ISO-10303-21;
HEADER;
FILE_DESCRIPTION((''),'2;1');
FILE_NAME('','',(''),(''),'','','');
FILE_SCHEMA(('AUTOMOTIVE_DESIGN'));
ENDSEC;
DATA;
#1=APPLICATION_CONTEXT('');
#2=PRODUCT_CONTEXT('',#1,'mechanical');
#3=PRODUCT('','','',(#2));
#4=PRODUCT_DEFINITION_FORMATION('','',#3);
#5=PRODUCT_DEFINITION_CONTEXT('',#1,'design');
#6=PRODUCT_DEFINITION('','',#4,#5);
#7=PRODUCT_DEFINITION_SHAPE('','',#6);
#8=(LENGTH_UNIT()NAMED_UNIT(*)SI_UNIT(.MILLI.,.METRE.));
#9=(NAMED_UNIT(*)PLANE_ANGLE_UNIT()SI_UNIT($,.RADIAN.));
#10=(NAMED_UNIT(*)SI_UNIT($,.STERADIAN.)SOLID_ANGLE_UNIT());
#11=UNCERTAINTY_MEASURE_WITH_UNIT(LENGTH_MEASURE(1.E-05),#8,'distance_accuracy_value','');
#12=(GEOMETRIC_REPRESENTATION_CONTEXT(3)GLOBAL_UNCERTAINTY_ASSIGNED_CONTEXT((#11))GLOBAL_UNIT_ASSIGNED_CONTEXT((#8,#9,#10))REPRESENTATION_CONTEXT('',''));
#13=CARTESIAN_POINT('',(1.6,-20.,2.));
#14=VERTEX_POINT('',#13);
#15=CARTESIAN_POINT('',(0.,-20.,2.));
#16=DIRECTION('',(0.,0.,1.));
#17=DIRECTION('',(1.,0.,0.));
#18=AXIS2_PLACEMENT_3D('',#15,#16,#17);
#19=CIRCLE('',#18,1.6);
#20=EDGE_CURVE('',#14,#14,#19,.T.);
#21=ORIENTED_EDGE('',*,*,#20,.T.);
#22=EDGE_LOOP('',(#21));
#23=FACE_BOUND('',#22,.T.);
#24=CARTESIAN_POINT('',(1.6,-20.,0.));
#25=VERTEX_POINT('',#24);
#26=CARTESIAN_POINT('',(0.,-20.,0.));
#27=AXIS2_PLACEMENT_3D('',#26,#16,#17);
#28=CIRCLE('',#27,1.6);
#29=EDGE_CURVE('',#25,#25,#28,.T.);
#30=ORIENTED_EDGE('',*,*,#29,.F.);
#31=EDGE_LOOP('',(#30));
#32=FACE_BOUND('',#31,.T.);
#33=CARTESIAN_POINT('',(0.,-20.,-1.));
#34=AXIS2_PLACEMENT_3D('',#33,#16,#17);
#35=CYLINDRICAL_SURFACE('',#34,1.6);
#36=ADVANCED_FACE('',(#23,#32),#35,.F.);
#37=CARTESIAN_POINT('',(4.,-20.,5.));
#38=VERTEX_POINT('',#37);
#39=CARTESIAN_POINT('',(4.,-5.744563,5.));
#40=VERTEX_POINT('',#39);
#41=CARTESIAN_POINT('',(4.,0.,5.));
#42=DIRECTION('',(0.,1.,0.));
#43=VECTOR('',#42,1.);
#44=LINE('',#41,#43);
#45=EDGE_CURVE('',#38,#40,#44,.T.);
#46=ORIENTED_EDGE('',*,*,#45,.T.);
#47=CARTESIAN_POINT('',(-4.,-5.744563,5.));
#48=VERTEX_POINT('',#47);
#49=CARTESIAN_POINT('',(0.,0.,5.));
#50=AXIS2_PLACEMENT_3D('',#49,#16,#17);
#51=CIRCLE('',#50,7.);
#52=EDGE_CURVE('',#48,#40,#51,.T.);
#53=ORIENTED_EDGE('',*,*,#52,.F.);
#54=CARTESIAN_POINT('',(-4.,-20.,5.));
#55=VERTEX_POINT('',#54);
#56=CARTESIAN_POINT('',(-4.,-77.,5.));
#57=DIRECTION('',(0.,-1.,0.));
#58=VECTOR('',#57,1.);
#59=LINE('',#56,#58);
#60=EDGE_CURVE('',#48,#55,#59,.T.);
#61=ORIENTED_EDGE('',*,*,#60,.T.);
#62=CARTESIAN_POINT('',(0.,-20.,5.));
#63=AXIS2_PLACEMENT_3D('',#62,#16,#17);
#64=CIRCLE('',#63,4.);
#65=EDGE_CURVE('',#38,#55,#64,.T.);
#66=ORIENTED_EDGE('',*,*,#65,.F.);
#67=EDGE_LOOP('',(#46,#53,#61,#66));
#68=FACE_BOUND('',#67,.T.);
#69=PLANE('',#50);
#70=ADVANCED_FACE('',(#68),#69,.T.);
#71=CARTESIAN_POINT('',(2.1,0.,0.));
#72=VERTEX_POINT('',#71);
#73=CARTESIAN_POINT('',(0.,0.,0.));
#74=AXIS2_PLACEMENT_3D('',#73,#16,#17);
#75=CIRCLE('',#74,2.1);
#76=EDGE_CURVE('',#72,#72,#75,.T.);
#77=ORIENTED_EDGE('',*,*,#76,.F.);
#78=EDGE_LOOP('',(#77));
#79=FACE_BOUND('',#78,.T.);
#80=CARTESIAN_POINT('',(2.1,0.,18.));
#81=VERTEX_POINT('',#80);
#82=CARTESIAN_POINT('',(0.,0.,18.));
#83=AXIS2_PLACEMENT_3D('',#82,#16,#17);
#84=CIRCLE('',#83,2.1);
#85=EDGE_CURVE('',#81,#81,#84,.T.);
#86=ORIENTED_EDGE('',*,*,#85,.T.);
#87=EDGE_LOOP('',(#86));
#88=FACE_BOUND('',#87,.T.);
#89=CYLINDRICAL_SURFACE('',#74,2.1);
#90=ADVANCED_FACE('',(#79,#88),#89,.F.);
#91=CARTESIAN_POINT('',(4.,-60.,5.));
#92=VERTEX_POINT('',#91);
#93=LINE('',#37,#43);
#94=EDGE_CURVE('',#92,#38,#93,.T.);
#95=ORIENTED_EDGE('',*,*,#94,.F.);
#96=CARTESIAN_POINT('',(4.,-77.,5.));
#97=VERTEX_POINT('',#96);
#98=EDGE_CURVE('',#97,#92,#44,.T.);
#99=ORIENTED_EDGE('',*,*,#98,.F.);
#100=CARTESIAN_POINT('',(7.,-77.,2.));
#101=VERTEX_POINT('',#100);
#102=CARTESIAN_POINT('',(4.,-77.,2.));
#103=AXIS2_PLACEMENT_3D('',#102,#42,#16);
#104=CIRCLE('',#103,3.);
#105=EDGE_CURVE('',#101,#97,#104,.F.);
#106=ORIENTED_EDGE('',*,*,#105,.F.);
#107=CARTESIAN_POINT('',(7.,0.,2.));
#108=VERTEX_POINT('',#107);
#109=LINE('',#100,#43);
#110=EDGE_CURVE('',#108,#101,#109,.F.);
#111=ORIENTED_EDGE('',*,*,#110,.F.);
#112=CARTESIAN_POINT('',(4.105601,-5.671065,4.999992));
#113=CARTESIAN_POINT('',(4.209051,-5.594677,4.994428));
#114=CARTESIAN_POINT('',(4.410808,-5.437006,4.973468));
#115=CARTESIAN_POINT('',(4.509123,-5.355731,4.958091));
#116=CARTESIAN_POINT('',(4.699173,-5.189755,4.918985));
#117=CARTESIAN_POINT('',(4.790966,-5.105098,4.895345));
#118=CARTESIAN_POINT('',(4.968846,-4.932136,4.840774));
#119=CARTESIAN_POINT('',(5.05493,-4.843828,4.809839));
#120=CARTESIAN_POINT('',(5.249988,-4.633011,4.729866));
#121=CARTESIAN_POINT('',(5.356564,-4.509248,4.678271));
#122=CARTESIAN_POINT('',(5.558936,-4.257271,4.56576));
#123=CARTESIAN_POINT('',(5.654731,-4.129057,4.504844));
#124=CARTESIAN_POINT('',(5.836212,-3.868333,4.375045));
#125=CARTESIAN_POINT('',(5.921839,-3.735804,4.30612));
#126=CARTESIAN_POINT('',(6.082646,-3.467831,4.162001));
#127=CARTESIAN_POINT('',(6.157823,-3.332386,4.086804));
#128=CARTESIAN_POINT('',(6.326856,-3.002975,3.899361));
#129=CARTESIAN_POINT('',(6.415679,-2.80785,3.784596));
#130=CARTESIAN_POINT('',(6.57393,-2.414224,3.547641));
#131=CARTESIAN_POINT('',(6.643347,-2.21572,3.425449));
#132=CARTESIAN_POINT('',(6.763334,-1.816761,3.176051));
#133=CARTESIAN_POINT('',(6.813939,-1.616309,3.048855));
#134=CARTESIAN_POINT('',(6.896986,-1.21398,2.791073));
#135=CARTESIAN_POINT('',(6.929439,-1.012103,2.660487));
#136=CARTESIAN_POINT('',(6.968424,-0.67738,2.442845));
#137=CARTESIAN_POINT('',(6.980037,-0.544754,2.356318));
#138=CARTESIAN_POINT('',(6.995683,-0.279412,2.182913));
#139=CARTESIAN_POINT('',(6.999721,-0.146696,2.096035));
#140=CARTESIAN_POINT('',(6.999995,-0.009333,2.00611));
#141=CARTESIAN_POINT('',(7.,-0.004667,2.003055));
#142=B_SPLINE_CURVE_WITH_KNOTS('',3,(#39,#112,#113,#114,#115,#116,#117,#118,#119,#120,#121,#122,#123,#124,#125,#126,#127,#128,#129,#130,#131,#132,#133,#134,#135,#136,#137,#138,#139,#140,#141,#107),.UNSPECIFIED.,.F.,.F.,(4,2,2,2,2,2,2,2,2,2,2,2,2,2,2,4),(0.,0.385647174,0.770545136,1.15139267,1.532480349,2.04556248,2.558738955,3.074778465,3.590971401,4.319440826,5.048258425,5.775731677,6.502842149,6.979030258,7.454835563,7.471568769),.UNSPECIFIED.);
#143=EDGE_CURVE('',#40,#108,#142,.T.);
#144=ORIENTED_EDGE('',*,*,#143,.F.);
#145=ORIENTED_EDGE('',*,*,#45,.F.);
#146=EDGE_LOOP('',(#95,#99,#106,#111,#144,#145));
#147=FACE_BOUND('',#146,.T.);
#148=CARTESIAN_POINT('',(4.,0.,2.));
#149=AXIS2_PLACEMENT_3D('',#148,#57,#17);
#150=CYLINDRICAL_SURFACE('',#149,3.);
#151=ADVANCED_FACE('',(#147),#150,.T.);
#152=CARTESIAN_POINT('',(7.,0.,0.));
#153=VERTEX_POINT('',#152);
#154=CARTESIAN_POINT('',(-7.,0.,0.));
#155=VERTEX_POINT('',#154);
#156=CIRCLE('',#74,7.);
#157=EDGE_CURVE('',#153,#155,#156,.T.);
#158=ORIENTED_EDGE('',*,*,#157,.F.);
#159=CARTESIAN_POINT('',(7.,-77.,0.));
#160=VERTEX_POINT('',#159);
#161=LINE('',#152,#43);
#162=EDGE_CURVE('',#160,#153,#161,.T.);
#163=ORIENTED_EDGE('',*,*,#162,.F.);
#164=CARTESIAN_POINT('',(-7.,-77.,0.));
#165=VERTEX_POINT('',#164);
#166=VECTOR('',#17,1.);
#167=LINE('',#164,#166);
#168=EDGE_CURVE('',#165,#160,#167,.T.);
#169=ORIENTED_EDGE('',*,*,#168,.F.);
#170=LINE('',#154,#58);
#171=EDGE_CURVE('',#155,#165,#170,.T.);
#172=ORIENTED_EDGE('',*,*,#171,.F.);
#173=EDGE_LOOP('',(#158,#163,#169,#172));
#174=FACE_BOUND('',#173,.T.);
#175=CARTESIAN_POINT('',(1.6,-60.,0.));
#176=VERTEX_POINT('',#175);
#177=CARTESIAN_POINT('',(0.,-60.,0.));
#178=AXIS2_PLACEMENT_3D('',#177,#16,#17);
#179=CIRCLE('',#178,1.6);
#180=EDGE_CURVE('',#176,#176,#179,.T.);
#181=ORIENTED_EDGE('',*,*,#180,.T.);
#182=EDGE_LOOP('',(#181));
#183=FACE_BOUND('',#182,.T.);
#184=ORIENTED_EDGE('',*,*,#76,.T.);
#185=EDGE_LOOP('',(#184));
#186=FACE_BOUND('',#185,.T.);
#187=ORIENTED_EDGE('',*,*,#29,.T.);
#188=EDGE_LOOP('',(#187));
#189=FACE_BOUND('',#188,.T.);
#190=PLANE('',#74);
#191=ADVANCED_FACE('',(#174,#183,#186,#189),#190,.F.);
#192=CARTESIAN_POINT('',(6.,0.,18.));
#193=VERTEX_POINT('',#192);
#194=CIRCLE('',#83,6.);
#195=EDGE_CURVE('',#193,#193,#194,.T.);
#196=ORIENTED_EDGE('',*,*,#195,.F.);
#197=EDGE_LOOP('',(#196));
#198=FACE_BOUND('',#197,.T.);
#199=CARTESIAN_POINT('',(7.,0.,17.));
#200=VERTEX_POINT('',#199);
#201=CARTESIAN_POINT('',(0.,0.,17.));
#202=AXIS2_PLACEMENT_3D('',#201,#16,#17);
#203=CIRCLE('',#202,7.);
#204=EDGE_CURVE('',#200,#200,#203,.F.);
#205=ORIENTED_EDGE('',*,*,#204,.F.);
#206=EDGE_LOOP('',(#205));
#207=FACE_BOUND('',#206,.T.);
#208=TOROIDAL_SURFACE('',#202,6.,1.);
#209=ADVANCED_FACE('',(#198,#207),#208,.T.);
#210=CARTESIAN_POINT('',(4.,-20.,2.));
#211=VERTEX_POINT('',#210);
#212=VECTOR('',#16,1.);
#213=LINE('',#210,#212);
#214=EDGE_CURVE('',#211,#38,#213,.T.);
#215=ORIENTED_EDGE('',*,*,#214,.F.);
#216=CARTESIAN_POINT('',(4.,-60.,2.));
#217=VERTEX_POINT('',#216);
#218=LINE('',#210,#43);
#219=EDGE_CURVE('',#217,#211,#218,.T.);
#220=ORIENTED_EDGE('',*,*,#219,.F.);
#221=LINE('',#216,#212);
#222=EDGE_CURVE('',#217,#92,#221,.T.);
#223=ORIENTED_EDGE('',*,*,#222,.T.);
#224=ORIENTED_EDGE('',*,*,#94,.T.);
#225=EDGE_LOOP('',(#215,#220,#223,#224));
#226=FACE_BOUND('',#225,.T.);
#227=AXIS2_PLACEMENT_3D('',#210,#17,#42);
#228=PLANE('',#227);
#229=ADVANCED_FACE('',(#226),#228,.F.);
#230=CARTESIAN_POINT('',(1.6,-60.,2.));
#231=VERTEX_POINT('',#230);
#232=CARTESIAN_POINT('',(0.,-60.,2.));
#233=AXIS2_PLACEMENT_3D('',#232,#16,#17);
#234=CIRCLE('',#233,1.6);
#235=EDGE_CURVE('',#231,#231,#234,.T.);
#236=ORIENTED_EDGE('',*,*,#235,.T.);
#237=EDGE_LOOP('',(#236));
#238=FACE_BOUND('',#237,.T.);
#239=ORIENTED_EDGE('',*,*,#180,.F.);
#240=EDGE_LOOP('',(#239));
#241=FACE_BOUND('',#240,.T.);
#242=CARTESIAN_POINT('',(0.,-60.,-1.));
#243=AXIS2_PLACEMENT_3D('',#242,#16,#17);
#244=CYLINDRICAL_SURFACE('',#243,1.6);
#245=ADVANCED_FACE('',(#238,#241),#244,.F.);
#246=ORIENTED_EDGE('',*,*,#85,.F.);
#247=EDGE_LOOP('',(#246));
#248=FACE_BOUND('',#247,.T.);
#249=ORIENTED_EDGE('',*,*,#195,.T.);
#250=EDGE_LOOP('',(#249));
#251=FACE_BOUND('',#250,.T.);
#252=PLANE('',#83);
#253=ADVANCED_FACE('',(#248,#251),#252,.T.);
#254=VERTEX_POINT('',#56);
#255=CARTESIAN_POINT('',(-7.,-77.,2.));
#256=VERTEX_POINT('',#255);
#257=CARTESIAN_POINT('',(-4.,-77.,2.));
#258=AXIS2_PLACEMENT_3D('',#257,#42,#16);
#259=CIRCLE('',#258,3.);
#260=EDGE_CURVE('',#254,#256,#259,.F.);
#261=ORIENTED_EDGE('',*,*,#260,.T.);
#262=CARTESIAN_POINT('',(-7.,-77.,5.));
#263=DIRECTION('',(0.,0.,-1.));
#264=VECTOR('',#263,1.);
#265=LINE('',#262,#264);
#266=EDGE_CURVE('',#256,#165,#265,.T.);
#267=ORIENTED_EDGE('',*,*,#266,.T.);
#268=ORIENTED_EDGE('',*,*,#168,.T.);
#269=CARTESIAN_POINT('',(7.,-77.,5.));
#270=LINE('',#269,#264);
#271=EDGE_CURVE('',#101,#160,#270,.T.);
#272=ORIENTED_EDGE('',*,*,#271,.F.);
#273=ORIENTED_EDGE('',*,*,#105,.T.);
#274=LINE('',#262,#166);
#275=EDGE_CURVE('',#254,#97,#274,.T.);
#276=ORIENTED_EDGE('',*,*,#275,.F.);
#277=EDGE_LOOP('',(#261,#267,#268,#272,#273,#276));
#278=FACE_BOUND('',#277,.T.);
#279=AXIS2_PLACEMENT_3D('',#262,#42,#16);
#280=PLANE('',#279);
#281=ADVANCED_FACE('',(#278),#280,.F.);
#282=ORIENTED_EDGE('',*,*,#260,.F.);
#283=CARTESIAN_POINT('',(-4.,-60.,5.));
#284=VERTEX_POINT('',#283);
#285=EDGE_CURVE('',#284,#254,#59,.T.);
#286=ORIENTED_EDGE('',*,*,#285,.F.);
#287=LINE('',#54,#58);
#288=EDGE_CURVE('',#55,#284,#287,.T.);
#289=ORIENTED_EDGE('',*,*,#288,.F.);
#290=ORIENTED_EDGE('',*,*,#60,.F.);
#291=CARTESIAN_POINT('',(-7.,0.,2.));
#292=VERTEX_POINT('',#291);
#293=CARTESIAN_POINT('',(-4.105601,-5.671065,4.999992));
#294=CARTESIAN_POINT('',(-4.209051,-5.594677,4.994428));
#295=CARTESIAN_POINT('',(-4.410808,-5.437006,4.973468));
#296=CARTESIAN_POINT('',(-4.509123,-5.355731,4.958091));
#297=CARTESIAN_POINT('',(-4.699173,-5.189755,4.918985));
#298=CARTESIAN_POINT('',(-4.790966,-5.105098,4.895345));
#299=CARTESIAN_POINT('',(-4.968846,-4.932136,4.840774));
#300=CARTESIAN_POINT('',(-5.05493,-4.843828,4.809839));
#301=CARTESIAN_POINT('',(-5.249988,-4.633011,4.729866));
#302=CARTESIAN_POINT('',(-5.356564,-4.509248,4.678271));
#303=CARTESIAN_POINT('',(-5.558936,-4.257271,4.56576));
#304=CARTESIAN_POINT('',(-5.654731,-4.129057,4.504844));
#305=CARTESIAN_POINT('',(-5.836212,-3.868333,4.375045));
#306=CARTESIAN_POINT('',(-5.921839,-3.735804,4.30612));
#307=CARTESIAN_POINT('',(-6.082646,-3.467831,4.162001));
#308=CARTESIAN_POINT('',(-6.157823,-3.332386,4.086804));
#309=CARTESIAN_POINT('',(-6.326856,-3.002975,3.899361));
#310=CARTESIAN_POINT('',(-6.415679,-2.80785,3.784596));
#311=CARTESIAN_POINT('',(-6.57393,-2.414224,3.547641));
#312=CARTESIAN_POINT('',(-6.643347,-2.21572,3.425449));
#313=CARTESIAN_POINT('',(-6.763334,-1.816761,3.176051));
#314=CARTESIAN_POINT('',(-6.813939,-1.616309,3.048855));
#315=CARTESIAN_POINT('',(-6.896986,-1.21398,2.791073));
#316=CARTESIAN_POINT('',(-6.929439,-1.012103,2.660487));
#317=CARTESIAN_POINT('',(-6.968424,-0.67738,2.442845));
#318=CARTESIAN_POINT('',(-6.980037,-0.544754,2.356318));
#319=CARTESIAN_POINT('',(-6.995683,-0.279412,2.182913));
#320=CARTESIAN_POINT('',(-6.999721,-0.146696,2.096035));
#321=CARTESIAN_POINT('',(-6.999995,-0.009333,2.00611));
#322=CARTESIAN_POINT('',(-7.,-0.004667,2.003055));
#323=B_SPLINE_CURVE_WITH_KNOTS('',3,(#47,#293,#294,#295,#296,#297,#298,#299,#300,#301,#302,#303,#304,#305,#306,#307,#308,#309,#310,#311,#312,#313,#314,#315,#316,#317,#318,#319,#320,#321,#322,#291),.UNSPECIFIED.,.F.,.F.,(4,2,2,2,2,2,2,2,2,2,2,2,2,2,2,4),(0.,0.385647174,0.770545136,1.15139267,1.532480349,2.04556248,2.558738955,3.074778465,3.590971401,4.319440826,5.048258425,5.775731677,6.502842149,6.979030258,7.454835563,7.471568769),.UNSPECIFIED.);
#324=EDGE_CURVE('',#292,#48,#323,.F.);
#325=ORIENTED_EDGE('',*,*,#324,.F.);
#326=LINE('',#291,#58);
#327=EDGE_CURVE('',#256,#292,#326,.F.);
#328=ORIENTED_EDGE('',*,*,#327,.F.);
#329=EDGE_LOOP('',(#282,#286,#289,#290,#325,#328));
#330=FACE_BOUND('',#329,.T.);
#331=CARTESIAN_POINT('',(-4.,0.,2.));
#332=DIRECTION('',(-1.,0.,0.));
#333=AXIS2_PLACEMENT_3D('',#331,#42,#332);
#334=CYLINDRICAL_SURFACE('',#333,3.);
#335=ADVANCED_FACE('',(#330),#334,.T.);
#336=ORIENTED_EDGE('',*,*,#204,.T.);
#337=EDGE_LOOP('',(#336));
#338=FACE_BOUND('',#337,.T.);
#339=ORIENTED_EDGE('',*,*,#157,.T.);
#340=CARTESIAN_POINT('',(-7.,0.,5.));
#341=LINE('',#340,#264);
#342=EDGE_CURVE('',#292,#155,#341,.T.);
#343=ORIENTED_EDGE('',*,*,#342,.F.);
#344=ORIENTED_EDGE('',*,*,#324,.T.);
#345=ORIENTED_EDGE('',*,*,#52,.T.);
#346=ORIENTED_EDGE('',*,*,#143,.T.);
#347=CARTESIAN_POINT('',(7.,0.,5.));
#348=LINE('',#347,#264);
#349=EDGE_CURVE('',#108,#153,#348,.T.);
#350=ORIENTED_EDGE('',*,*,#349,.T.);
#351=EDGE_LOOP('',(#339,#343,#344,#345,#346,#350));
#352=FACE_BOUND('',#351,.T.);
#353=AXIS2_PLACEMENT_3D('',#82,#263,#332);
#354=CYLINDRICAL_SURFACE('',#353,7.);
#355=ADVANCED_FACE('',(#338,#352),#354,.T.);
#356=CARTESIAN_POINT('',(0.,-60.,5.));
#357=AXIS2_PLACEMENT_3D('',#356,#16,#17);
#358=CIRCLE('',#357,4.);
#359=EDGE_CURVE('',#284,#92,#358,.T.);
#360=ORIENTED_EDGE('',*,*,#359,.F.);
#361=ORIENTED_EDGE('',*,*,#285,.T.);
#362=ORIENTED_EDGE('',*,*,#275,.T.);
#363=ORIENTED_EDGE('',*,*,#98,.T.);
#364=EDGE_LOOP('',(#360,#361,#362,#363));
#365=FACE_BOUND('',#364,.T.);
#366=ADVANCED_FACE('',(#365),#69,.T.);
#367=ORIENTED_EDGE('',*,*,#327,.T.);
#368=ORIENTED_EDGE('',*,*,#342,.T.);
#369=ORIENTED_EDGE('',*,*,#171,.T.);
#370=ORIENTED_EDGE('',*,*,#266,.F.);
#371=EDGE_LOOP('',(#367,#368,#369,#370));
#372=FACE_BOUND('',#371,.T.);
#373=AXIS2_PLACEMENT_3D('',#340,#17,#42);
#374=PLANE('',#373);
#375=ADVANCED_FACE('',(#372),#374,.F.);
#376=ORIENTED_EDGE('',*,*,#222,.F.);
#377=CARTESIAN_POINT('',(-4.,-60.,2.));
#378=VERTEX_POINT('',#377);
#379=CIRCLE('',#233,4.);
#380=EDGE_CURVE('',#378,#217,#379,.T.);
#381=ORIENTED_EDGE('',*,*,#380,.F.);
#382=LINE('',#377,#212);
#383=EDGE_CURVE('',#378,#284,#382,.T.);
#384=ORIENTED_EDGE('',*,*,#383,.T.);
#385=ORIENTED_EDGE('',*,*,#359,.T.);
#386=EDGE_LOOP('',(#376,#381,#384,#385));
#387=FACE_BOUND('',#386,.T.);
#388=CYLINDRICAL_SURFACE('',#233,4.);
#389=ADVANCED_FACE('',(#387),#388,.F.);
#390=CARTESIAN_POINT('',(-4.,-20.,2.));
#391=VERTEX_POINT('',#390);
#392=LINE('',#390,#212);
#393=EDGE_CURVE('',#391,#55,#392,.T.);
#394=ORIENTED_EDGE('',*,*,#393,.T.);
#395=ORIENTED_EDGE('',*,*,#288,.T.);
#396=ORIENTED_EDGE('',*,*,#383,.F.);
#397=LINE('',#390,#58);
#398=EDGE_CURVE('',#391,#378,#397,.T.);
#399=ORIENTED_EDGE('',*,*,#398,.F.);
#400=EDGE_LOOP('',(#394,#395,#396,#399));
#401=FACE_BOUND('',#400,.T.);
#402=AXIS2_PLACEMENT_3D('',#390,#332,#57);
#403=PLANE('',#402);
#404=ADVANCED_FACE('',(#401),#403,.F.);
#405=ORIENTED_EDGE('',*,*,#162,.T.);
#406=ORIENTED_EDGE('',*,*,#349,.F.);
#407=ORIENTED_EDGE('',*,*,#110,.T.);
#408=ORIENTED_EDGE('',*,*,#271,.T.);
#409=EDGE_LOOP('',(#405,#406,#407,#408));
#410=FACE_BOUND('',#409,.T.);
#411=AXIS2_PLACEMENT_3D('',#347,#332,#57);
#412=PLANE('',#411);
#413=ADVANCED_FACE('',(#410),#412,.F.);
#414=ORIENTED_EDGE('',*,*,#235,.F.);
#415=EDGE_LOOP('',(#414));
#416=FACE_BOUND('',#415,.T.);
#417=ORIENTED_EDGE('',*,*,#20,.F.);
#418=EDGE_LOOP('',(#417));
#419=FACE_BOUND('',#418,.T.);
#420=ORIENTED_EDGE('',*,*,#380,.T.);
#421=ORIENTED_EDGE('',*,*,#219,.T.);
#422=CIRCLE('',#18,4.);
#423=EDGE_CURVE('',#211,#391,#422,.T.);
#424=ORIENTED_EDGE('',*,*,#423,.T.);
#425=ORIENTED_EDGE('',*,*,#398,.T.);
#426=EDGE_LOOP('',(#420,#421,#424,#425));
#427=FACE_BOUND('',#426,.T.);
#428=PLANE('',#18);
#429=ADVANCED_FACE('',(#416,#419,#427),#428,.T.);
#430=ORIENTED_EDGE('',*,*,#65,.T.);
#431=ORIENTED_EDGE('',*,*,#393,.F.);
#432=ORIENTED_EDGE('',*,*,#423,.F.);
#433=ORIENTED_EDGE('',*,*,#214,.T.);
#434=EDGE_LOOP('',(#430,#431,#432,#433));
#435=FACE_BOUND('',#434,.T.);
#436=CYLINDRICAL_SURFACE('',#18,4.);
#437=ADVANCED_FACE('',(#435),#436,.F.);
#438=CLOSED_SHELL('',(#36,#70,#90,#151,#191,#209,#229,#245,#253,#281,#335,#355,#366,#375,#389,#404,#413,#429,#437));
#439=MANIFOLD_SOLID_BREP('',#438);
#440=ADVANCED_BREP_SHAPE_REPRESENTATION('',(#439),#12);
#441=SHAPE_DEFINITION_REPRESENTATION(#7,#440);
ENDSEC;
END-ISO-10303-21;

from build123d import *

# Parameters (mm, degrees)
SKETCH1_R           = 7
BOSS_EXTRUDE1_DEPTH = 18
SKETCH2_W           = 14
SKETCH2_H           = 77
BOSS_EXTRUDE2_DEPTH = 5
SKETCH8_R           = 2.1
CUT_EXTRUDE5_DEPTH  = 18
FILLET3_R           = 3
CUT_EXTRUDE6_DEPTH  = 3
SKETCH10_R          = 1.6
CUT_EXTRUDE7_DEPTH  = 3
FILLET4_R           = 1


with BuildPart() as part:
    # Sketch1 → Boss-Extrude1 (new body)
    with BuildSketch(Plane.XY):
        Circle(SKETCH1_R)
    extrude(amount=BOSS_EXTRUDE1_DEPTH)

    # Sketch2 → Boss-Extrude2 (add)
    with BuildSketch(Plane.XY):
        with Locations((0, -38.5)):
            Rectangle(SKETCH2_W, SKETCH2_H)
    extrude(amount=BOSS_EXTRUDE2_DEPTH)

    # Sketch8 → Cut-Extrude5 (cut)
    with BuildSketch(Plane.XY.offset(18)):
        Circle(SKETCH8_R)
    extrude(amount=-CUT_EXTRUDE5_DEPTH, mode=Mode.SUBTRACT)

    # Fillet3
    # the kernel refuses this fillet: 3 mm, written as the material it takes off along each edge
    with BuildSketch(Plane(origin=(7, 7.5, 5), x_dir=(-1, 0, 0), z_dir=(0, -1, 0))) as fillet3_piece_1_section:
        with BuildLine():
            CenterArc((FILLET3_R, FILLET3_R), FILLET3_R, 180, 90)
            Line((0, FILLET3_R), (0, 0))
            Line((0, 0), (FILLET3_R, 0))
        make_face()
    fillet3_piece_1 = extrude(amount=92, mode=Mode.PRIVATE)
    fillet3_piece_1 = fillet3_piece_1 - Plane(origin=(0, 0, 4.306838987), x_dir=(1, 0, 0), z_dir=(0, 0, -1)) * Cylinder(7, 196, mode=Mode.PRIVATE)
    add(fillet3_piece_1, mode=Mode.SUBTRACT)
    with BuildSketch(Plane(origin=(-7, -84.5, 5), x_dir=(0, 0, -1), z_dir=(0, 1, 0))) as fillet3_piece_2_section:
        with BuildLine():
            CenterArc((FILLET3_R, -FILLET3_R), FILLET3_R, 90, 90)
            Line((0, -FILLET3_R), (0, 0))
            Line((0, 0), (FILLET3_R, 0))
        make_face()
    fillet3_piece_2 = extrude(amount=92, mode=Mode.PRIVATE)
    fillet3_piece_2 = fillet3_piece_2 - Plane(origin=(0, 0, 4.306838506), x_dir=(1, 0, 0), z_dir=(0, 0, -1)) * Cylinder(7, 196, mode=Mode.PRIVATE)
    add(fillet3_piece_2, mode=Mode.SUBTRACT)

    # Sketch6 → Cut-Extrude6 (cut)
    with BuildSketch(Plane.XY.offset(5)):
        with BuildLine():
            Line((4, -20), (4, -60))
            ThreePointArc((4, -60), (0, -64), (-4, -60))
            Line((-4, -60), (-4, -20))
            ThreePointArc((-4, -20), (0, -16), (4, -20))
        make_face()
    extrude(amount=-CUT_EXTRUDE6_DEPTH, mode=Mode.SUBTRACT)

    # Sketch10 → Cut-Extrude7 (cut)
    with BuildSketch(Plane.XY.offset(2)):
        with Locations((0, -20)):
            Circle(SKETCH10_R)
        with Locations((0, -60)):
            Circle(SKETCH10_R)
    extrude(amount=-CUT_EXTRUDE7_DEPTH, mode=Mode.SUBTRACT)

    # Fillet4
    fillet4_edges = [part.edges().sort_by_distance(p)[0] for p in [
        (-7, 0, 18),
    ]]
    fillet(fillet4_edges, radius=FILLET4_R)


solid = part.part
